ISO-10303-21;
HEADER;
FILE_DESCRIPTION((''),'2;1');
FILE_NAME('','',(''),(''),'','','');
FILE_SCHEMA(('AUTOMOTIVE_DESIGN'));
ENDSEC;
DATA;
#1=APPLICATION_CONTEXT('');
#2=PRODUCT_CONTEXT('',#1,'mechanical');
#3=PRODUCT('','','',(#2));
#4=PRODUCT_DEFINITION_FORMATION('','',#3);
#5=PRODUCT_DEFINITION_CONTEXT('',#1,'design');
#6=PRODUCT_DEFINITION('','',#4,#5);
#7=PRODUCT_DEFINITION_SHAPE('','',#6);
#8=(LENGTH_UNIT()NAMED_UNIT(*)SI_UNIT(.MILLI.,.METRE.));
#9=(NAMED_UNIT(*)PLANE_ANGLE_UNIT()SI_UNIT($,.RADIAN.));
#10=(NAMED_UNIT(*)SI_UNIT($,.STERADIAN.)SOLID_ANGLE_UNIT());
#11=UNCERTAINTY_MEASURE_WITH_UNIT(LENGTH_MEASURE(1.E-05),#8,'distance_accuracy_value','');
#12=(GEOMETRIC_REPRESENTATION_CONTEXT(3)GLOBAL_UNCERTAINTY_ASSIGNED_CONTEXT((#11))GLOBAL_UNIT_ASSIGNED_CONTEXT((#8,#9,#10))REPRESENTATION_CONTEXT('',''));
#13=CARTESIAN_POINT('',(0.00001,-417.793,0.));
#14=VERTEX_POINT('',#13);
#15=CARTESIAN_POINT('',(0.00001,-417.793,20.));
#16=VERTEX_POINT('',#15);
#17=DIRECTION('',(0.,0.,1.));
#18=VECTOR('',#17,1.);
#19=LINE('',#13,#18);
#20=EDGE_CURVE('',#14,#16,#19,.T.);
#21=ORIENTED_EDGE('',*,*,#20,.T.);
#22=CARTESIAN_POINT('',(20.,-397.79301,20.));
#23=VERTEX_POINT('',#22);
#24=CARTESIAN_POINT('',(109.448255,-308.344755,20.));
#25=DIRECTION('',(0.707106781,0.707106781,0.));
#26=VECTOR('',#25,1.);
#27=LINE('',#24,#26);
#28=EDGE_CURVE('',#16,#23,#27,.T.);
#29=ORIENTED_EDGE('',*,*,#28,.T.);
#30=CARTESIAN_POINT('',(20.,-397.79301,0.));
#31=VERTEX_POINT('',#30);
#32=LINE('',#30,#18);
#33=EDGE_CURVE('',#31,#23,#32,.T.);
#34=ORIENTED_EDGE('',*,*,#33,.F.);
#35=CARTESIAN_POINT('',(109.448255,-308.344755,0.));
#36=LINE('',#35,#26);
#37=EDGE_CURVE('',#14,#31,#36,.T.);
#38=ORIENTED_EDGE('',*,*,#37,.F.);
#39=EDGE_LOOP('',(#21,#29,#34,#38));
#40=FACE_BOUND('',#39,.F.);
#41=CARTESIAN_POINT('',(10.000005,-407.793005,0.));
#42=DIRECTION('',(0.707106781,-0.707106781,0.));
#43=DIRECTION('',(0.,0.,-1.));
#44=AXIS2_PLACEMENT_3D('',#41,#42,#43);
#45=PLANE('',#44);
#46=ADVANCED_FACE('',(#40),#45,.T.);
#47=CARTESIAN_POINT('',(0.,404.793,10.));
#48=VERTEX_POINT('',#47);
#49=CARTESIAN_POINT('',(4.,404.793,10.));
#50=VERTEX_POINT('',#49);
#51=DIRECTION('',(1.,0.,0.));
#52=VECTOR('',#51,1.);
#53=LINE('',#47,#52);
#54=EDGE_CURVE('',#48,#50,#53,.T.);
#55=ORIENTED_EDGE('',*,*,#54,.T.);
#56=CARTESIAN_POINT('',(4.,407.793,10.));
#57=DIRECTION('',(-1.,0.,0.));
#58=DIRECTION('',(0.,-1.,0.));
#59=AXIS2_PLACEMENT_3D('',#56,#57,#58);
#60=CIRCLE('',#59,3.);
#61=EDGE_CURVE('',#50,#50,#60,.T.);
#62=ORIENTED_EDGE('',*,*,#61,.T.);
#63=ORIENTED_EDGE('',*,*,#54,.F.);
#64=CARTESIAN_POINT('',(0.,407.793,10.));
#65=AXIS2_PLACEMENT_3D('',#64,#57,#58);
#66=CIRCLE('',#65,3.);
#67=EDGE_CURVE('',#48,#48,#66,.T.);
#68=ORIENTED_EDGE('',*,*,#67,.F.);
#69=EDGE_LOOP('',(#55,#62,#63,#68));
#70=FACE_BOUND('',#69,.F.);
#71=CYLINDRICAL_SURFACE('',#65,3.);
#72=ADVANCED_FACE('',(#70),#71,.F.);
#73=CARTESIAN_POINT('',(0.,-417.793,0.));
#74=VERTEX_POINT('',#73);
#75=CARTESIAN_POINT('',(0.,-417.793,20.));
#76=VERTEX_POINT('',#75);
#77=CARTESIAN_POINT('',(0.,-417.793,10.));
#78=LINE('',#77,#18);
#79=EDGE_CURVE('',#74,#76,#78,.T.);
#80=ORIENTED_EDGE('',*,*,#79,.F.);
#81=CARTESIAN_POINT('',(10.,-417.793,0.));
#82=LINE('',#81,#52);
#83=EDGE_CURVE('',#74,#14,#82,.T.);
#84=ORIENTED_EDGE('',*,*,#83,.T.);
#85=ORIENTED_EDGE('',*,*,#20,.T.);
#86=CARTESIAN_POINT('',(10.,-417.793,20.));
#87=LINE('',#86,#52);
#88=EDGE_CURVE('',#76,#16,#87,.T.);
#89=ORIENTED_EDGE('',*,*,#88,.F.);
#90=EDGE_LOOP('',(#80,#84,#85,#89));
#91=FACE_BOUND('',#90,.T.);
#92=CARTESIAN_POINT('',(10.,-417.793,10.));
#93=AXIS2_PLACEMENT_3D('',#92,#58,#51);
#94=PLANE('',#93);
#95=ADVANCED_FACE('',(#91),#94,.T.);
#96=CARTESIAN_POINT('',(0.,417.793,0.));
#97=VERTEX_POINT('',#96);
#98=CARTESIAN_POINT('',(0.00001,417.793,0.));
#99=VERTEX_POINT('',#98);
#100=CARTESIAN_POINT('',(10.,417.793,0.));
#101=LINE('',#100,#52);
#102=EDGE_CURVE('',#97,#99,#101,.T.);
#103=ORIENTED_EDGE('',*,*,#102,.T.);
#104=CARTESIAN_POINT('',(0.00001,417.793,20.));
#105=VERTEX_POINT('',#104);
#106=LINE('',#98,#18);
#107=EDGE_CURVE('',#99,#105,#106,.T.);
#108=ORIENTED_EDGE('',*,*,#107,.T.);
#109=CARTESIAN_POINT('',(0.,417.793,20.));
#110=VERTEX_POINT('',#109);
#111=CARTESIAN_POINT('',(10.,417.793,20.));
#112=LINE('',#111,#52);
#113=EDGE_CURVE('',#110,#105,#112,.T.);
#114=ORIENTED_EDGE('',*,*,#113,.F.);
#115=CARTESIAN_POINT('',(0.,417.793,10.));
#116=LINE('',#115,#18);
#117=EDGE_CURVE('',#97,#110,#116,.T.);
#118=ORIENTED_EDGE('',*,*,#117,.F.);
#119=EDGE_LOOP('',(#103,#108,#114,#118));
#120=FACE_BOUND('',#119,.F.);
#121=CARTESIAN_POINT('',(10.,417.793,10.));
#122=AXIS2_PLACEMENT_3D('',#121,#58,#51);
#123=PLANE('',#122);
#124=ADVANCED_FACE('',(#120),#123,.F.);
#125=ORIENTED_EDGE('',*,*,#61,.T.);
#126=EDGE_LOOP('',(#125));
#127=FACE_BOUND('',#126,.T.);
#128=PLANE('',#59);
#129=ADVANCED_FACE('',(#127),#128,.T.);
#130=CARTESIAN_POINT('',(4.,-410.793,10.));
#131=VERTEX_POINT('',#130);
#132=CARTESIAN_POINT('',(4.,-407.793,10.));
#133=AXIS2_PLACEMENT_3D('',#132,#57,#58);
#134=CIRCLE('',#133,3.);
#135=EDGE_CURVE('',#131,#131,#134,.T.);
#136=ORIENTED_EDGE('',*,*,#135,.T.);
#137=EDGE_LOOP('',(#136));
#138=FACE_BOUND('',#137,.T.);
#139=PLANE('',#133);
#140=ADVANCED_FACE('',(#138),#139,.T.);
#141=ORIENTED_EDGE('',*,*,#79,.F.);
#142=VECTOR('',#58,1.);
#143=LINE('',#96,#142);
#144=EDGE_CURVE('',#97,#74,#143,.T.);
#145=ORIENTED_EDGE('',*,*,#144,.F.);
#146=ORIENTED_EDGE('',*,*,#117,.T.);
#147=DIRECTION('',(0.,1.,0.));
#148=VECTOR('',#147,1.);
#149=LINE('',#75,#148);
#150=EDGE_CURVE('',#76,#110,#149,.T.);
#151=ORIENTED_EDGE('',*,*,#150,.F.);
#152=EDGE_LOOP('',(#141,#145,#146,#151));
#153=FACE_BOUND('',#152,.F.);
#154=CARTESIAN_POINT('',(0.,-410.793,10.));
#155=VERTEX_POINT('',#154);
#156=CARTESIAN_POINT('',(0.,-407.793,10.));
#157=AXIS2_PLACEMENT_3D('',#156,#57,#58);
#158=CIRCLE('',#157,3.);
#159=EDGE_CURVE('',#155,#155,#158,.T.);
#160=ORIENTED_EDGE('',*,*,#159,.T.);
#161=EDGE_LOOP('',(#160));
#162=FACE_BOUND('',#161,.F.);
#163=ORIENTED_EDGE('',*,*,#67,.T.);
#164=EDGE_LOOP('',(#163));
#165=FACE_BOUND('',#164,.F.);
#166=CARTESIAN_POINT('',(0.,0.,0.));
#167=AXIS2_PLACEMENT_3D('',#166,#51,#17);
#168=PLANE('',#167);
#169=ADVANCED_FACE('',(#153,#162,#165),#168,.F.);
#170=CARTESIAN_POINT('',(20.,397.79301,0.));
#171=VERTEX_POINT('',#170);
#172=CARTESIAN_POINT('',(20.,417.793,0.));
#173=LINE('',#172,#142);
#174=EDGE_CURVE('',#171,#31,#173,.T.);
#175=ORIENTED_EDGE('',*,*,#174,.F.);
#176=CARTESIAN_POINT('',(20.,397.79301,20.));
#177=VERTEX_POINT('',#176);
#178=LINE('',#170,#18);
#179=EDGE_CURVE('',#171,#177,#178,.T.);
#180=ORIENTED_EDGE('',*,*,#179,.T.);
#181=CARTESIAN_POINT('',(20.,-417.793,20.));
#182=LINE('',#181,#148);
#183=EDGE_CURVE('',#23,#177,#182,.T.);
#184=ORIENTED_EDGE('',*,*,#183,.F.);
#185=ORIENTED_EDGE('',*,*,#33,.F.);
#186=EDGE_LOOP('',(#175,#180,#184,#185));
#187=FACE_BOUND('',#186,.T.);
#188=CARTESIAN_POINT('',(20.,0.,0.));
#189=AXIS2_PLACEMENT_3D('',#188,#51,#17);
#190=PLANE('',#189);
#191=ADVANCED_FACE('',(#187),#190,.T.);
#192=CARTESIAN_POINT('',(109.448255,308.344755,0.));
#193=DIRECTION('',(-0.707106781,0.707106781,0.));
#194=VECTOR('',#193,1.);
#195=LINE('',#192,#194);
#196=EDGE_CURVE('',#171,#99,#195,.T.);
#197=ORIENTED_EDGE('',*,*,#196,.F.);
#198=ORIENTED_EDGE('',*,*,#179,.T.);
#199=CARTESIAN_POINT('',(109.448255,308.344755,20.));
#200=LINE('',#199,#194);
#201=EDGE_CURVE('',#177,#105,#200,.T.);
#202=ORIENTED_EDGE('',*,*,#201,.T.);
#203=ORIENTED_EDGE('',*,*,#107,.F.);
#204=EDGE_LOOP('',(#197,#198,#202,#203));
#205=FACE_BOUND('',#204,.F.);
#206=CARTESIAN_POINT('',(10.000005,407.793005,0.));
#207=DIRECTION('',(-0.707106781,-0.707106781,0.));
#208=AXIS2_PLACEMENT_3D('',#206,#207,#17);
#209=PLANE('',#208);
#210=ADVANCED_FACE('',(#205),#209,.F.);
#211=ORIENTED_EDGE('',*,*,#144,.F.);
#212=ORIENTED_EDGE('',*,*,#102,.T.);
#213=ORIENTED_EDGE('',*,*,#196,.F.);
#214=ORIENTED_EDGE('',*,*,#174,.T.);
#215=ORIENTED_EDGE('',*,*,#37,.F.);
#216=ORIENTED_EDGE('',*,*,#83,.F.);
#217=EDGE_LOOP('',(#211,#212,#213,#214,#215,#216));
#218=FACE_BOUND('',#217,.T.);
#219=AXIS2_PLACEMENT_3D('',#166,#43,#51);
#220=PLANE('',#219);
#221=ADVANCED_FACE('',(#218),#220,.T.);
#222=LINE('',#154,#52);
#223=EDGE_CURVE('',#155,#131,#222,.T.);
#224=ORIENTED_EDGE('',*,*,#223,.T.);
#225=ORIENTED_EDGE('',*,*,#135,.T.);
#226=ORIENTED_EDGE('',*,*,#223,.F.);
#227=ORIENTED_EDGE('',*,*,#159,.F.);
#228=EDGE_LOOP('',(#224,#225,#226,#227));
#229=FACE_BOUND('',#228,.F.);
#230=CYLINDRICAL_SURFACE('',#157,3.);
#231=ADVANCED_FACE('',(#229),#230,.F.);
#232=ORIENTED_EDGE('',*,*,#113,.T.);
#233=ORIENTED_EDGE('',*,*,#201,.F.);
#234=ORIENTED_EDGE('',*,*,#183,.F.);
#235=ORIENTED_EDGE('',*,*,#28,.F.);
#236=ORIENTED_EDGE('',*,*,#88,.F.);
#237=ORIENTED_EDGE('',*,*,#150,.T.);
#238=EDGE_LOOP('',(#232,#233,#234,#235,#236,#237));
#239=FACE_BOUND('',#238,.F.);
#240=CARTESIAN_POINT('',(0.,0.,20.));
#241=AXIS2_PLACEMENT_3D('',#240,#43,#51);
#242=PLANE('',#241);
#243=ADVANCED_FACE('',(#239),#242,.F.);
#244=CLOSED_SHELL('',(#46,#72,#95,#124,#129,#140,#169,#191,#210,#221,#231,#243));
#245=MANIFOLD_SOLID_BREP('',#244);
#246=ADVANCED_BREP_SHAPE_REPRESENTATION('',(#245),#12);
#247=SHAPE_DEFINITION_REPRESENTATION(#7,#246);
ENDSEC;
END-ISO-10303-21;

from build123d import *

# Parameters (mm, degrees)
F0_W     = 20
F0_H     = 20
F1_DEPTH = 417.793
F2_SIZE2 = 19.99999
F2_SIZE  = 19.99999
F3_SIZE  = 19.99999
F4_R     = 3
F5_DEPTH = 4
F6_R     = 3
F7_DEPTH = 4


# Not quite as in the source:
# - a fillet or chamfer is up to 0.001 mm smaller than in the source, because OpenCascade refuses the exact size


with BuildPart() as f1:
    # F0 (on Front) → F1 (new body, symmetric)
    with BuildSketch(Plane.XZ):
        with Locations((10, 10)):
            Rectangle(F0_W, F0_H)
    extrude(amount=F1_DEPTH, both=True)

    # F2 (size 20 and 20 in the source; OpenCascade refuses exactly that, so slightly less here)
    f2_edges = [f1.edges().sort_by_distance(p)[0] for p in [
        (20, -417.793, 10),
    ]]
    chamfer(f2_edges, length=F2_SIZE, length2=F2_SIZE2)

    # F3 (size 20 in the source; OpenCascade refuses exactly that, so slightly less here)
    f3_edges = [f1.edges().sort_by_distance(p)[0] for p in [
        (20, 417.793, 10),
    ]]
    chamfer(f3_edges, length=F3_SIZE)

    # F4 (on face) → F5 (cut)
    with BuildSketch(Plane(origin=(0, 0, 0), x_dir=(0, -1, 0), z_dir=(-1, 0, 0))):
        with Locations((-407.793, 10)):
            Circle(F4_R)
    extrude(amount=-F5_DEPTH, mode=Mode.SUBTRACT)

    # F6 (on face) → F7 (cut)
    with BuildSketch(Plane(origin=(0, 0, 0), x_dir=(0, -1, 0), z_dir=(-1, 0, 0))):
        with Locations((407.793, 10)):
            Circle(F6_R)
    extrude(amount=-F7_DEPTH, mode=Mode.SUBTRACT)


solid = f1.part
